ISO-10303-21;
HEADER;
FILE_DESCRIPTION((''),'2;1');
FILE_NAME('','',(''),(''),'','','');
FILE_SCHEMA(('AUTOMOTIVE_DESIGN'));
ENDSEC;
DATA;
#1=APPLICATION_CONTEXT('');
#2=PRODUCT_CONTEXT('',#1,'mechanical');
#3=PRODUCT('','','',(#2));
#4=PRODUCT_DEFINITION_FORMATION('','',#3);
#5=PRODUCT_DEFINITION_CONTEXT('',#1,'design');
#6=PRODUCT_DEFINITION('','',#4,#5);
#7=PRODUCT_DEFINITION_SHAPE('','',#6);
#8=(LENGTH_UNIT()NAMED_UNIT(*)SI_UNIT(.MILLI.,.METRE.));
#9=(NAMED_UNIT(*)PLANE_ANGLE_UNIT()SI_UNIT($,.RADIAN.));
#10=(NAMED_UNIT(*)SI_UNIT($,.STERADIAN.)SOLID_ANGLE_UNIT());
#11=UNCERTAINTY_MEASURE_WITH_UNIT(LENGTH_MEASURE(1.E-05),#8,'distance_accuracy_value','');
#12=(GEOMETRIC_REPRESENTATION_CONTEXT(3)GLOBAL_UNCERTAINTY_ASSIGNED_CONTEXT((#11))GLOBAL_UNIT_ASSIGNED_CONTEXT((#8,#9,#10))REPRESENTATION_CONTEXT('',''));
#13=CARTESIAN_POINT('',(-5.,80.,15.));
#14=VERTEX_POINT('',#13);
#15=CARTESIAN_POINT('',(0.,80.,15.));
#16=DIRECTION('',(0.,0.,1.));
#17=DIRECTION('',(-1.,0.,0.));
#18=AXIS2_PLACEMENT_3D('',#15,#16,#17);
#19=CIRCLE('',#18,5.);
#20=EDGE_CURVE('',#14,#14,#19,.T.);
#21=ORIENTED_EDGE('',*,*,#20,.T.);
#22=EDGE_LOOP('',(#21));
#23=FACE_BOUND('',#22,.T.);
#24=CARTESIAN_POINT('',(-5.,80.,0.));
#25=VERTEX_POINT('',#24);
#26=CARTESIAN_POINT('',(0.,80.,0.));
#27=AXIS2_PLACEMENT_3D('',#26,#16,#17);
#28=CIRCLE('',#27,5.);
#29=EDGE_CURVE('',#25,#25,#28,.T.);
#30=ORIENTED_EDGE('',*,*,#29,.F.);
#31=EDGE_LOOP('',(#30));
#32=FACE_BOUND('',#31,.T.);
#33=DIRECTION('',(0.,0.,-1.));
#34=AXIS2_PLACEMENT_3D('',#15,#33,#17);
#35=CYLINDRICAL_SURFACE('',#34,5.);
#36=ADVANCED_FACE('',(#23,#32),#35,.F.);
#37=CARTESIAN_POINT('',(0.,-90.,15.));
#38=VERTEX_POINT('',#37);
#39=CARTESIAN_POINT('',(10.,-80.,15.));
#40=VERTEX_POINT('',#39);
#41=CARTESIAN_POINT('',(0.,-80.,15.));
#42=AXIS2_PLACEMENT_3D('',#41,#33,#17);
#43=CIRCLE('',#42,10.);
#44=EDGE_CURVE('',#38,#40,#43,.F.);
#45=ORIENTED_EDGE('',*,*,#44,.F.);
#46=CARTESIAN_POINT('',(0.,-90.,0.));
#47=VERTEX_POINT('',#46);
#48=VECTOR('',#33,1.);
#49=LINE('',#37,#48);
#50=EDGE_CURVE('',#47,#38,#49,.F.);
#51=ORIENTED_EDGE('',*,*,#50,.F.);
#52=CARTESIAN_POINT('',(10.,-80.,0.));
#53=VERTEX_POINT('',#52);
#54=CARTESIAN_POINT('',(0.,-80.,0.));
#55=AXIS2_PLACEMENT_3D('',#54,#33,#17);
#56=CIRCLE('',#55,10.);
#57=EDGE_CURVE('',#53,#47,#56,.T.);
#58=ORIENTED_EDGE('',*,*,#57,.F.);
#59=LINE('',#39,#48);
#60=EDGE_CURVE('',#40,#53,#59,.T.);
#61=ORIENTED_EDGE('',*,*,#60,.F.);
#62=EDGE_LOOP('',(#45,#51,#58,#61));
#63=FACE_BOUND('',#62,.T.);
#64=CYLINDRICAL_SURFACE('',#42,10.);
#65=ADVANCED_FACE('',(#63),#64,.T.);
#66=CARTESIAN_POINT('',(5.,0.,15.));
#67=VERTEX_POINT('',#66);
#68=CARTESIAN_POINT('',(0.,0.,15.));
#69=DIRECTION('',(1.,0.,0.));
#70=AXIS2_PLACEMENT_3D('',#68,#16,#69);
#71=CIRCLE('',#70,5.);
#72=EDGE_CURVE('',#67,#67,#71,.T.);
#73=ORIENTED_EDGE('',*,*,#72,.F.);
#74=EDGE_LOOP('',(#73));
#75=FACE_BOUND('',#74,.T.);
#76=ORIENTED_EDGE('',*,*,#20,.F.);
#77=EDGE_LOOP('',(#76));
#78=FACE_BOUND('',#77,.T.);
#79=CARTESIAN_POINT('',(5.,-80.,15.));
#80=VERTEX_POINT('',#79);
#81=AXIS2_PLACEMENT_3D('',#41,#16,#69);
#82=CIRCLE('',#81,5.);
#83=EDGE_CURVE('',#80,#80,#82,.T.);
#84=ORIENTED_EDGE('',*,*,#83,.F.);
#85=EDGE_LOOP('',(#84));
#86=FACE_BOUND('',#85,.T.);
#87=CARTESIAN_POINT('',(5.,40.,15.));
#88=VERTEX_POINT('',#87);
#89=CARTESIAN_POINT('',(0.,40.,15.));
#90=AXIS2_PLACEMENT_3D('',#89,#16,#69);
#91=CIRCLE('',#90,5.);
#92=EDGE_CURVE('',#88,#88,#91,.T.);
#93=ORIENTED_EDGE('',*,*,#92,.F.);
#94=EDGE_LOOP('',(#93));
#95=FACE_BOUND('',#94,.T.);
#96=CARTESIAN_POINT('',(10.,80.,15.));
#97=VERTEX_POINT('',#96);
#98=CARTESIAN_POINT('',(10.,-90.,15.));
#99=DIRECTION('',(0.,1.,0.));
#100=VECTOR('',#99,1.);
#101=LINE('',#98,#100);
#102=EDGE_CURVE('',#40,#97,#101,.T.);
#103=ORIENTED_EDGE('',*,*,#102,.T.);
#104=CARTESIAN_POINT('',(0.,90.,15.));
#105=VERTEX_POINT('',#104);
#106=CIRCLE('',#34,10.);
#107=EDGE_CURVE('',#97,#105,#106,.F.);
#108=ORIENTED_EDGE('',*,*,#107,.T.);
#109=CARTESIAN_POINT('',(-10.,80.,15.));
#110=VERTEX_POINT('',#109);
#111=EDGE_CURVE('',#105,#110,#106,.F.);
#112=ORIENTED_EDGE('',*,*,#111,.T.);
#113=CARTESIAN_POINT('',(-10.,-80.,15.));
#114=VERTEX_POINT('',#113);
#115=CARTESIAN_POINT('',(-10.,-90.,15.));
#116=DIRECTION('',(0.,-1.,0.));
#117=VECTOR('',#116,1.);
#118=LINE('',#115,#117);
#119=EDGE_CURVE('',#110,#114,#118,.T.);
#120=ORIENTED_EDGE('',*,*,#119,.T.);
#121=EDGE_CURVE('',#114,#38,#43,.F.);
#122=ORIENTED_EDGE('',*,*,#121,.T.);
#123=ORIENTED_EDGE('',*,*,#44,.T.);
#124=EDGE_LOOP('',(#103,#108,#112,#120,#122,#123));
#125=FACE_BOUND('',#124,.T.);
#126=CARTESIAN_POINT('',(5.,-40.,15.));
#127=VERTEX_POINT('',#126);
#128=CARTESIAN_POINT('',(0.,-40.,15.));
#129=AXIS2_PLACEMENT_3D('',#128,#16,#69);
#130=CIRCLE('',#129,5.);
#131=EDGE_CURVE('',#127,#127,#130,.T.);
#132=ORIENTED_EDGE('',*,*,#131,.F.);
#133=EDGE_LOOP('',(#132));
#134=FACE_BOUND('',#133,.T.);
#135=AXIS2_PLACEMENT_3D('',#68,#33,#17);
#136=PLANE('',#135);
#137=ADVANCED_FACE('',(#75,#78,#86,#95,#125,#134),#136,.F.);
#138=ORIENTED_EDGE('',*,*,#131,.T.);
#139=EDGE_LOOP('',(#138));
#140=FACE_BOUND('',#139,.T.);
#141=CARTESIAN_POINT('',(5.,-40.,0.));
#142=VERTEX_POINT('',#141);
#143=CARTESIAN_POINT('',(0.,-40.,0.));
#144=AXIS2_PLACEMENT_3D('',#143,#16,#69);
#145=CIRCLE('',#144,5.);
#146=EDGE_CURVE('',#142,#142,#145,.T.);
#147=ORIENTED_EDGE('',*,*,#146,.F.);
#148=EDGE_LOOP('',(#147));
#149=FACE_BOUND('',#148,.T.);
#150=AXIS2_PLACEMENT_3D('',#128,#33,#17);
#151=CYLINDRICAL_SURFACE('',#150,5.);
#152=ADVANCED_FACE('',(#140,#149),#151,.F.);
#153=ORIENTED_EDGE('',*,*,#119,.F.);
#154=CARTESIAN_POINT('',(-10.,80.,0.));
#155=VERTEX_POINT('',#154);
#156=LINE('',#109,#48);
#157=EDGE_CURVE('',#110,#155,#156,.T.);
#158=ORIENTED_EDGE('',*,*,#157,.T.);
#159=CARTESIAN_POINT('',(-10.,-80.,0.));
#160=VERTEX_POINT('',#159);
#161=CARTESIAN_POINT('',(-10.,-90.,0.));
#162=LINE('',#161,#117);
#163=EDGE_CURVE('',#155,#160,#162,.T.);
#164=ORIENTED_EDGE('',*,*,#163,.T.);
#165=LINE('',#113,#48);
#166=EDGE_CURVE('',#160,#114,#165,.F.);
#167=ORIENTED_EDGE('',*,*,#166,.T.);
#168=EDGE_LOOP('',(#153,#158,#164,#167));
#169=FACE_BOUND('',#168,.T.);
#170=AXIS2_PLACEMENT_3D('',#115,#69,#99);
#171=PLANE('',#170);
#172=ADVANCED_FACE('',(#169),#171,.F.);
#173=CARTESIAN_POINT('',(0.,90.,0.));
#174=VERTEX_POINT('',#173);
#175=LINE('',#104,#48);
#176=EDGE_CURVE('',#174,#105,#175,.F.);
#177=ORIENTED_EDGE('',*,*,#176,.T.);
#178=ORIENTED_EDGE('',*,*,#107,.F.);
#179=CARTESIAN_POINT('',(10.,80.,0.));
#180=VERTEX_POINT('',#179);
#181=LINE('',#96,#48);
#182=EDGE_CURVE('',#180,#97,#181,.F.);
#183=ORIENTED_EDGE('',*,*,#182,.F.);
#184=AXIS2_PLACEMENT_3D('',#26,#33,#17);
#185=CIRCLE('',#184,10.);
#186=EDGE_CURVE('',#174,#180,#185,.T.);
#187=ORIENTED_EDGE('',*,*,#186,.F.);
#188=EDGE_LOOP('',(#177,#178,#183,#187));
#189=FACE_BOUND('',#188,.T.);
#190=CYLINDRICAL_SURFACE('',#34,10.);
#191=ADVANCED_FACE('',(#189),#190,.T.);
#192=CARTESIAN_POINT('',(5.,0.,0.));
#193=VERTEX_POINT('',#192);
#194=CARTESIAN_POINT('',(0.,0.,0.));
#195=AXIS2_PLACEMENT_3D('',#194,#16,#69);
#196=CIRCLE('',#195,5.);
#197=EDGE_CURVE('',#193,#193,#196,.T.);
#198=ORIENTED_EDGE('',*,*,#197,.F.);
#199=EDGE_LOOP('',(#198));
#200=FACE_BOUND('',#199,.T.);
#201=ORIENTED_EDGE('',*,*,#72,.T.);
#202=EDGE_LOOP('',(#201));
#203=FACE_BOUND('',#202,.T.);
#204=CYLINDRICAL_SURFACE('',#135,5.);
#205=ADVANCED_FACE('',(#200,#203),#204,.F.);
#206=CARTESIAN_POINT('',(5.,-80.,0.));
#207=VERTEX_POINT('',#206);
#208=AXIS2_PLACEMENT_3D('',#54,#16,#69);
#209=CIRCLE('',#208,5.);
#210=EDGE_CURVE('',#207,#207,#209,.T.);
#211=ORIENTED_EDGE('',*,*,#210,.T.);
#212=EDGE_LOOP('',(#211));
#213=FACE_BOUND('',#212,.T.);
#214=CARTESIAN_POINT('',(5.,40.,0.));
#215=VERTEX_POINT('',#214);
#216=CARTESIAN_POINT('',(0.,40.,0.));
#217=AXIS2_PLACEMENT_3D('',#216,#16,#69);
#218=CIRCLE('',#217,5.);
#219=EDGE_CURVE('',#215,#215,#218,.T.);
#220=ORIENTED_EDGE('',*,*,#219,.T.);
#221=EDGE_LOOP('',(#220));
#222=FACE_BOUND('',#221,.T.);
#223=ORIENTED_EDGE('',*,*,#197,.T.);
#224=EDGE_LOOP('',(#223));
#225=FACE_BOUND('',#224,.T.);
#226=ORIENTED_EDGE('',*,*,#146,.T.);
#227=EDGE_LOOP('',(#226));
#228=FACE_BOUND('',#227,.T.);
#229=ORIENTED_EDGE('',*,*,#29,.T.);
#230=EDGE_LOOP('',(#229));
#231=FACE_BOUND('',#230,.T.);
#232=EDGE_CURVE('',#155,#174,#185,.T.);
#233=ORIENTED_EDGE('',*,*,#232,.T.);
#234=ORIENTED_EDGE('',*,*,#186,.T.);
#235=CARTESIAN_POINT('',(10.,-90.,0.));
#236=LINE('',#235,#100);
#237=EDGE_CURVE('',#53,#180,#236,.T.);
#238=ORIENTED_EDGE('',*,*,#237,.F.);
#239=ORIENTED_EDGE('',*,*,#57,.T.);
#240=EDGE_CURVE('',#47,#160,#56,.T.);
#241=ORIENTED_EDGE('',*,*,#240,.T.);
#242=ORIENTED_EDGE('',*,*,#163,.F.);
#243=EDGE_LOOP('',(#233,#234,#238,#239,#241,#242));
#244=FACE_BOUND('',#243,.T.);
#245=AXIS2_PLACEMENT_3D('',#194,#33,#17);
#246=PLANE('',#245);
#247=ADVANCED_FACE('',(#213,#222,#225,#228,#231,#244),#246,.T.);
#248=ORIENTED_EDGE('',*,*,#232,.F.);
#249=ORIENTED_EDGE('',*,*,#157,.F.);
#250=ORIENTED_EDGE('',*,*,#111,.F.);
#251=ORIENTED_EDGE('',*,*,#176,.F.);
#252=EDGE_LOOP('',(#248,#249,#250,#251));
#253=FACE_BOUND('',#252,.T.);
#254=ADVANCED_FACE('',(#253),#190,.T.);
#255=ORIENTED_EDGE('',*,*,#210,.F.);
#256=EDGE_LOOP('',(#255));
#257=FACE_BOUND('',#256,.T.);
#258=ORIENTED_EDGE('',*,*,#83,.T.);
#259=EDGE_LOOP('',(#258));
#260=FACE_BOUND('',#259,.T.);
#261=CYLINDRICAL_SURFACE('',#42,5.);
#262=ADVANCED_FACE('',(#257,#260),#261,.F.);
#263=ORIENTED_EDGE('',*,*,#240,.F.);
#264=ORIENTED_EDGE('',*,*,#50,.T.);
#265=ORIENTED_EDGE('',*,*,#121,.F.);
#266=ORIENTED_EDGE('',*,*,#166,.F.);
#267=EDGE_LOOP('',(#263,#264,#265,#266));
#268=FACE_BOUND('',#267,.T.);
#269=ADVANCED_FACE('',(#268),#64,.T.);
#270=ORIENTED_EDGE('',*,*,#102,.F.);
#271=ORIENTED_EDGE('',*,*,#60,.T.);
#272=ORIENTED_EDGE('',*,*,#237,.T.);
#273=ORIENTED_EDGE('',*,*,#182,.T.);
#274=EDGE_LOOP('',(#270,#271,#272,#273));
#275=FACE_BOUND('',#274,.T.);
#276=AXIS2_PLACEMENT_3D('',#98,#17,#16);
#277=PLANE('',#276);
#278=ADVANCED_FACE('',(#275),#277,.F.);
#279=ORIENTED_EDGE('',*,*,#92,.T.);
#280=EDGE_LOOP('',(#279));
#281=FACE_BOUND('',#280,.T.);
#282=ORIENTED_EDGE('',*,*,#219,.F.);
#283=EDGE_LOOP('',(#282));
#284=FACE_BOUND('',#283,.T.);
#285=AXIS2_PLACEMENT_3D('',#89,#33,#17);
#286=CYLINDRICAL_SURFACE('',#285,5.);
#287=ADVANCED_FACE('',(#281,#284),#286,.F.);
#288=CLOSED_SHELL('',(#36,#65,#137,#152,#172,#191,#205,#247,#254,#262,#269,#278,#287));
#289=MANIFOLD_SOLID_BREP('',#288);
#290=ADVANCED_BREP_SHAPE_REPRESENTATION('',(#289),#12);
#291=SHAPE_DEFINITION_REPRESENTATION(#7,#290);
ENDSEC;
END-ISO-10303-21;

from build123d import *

# Parameters (mm, degrees)
SKETCH_1_W      = 20
SKETCH_1_H      = 180
SKETCH_1_R      = 5
EXTRUDE_1_DEPTH = 15
FILLET_1_R      = 10


with BuildPart() as part:
    # 草图1 → 凸台-拉伸1 (new body)
    with BuildSketch(Plane.XY):
        Rectangle(SKETCH_1_W, SKETCH_1_H)
        with Locations((0, -80)):
            Circle(SKETCH_1_R, mode=Mode.SUBTRACT)
        with Locations(Location((0, 80, 0), (0, 0, 180))):
            Circle(SKETCH_1_R, mode=Mode.SUBTRACT)
        Circle(SKETCH_1_R, mode=Mode.SUBTRACT)
        with Locations((0, -40)):
            Circle(SKETCH_1_R, mode=Mode.SUBTRACT)
        with Locations((0, 40)):
            Circle(SKETCH_1_R, mode=Mode.SUBTRACT)
    extrude(amount=EXTRUDE_1_DEPTH)

    # 圆角1
    fillet_1_edges = [part.edges().sort_by_distance(p)[0] for p in [
        (-10, -90, 7.5),
        (10, -90, 7.5),
        (10, 90, 7.5),
        (-10, 90, 7.5),
    ]]
    fillet(fillet_1_edges, radius=FILLET_1_R - 0.0001)  # a hair under: the kernel refuses the full size


solid = part.part
